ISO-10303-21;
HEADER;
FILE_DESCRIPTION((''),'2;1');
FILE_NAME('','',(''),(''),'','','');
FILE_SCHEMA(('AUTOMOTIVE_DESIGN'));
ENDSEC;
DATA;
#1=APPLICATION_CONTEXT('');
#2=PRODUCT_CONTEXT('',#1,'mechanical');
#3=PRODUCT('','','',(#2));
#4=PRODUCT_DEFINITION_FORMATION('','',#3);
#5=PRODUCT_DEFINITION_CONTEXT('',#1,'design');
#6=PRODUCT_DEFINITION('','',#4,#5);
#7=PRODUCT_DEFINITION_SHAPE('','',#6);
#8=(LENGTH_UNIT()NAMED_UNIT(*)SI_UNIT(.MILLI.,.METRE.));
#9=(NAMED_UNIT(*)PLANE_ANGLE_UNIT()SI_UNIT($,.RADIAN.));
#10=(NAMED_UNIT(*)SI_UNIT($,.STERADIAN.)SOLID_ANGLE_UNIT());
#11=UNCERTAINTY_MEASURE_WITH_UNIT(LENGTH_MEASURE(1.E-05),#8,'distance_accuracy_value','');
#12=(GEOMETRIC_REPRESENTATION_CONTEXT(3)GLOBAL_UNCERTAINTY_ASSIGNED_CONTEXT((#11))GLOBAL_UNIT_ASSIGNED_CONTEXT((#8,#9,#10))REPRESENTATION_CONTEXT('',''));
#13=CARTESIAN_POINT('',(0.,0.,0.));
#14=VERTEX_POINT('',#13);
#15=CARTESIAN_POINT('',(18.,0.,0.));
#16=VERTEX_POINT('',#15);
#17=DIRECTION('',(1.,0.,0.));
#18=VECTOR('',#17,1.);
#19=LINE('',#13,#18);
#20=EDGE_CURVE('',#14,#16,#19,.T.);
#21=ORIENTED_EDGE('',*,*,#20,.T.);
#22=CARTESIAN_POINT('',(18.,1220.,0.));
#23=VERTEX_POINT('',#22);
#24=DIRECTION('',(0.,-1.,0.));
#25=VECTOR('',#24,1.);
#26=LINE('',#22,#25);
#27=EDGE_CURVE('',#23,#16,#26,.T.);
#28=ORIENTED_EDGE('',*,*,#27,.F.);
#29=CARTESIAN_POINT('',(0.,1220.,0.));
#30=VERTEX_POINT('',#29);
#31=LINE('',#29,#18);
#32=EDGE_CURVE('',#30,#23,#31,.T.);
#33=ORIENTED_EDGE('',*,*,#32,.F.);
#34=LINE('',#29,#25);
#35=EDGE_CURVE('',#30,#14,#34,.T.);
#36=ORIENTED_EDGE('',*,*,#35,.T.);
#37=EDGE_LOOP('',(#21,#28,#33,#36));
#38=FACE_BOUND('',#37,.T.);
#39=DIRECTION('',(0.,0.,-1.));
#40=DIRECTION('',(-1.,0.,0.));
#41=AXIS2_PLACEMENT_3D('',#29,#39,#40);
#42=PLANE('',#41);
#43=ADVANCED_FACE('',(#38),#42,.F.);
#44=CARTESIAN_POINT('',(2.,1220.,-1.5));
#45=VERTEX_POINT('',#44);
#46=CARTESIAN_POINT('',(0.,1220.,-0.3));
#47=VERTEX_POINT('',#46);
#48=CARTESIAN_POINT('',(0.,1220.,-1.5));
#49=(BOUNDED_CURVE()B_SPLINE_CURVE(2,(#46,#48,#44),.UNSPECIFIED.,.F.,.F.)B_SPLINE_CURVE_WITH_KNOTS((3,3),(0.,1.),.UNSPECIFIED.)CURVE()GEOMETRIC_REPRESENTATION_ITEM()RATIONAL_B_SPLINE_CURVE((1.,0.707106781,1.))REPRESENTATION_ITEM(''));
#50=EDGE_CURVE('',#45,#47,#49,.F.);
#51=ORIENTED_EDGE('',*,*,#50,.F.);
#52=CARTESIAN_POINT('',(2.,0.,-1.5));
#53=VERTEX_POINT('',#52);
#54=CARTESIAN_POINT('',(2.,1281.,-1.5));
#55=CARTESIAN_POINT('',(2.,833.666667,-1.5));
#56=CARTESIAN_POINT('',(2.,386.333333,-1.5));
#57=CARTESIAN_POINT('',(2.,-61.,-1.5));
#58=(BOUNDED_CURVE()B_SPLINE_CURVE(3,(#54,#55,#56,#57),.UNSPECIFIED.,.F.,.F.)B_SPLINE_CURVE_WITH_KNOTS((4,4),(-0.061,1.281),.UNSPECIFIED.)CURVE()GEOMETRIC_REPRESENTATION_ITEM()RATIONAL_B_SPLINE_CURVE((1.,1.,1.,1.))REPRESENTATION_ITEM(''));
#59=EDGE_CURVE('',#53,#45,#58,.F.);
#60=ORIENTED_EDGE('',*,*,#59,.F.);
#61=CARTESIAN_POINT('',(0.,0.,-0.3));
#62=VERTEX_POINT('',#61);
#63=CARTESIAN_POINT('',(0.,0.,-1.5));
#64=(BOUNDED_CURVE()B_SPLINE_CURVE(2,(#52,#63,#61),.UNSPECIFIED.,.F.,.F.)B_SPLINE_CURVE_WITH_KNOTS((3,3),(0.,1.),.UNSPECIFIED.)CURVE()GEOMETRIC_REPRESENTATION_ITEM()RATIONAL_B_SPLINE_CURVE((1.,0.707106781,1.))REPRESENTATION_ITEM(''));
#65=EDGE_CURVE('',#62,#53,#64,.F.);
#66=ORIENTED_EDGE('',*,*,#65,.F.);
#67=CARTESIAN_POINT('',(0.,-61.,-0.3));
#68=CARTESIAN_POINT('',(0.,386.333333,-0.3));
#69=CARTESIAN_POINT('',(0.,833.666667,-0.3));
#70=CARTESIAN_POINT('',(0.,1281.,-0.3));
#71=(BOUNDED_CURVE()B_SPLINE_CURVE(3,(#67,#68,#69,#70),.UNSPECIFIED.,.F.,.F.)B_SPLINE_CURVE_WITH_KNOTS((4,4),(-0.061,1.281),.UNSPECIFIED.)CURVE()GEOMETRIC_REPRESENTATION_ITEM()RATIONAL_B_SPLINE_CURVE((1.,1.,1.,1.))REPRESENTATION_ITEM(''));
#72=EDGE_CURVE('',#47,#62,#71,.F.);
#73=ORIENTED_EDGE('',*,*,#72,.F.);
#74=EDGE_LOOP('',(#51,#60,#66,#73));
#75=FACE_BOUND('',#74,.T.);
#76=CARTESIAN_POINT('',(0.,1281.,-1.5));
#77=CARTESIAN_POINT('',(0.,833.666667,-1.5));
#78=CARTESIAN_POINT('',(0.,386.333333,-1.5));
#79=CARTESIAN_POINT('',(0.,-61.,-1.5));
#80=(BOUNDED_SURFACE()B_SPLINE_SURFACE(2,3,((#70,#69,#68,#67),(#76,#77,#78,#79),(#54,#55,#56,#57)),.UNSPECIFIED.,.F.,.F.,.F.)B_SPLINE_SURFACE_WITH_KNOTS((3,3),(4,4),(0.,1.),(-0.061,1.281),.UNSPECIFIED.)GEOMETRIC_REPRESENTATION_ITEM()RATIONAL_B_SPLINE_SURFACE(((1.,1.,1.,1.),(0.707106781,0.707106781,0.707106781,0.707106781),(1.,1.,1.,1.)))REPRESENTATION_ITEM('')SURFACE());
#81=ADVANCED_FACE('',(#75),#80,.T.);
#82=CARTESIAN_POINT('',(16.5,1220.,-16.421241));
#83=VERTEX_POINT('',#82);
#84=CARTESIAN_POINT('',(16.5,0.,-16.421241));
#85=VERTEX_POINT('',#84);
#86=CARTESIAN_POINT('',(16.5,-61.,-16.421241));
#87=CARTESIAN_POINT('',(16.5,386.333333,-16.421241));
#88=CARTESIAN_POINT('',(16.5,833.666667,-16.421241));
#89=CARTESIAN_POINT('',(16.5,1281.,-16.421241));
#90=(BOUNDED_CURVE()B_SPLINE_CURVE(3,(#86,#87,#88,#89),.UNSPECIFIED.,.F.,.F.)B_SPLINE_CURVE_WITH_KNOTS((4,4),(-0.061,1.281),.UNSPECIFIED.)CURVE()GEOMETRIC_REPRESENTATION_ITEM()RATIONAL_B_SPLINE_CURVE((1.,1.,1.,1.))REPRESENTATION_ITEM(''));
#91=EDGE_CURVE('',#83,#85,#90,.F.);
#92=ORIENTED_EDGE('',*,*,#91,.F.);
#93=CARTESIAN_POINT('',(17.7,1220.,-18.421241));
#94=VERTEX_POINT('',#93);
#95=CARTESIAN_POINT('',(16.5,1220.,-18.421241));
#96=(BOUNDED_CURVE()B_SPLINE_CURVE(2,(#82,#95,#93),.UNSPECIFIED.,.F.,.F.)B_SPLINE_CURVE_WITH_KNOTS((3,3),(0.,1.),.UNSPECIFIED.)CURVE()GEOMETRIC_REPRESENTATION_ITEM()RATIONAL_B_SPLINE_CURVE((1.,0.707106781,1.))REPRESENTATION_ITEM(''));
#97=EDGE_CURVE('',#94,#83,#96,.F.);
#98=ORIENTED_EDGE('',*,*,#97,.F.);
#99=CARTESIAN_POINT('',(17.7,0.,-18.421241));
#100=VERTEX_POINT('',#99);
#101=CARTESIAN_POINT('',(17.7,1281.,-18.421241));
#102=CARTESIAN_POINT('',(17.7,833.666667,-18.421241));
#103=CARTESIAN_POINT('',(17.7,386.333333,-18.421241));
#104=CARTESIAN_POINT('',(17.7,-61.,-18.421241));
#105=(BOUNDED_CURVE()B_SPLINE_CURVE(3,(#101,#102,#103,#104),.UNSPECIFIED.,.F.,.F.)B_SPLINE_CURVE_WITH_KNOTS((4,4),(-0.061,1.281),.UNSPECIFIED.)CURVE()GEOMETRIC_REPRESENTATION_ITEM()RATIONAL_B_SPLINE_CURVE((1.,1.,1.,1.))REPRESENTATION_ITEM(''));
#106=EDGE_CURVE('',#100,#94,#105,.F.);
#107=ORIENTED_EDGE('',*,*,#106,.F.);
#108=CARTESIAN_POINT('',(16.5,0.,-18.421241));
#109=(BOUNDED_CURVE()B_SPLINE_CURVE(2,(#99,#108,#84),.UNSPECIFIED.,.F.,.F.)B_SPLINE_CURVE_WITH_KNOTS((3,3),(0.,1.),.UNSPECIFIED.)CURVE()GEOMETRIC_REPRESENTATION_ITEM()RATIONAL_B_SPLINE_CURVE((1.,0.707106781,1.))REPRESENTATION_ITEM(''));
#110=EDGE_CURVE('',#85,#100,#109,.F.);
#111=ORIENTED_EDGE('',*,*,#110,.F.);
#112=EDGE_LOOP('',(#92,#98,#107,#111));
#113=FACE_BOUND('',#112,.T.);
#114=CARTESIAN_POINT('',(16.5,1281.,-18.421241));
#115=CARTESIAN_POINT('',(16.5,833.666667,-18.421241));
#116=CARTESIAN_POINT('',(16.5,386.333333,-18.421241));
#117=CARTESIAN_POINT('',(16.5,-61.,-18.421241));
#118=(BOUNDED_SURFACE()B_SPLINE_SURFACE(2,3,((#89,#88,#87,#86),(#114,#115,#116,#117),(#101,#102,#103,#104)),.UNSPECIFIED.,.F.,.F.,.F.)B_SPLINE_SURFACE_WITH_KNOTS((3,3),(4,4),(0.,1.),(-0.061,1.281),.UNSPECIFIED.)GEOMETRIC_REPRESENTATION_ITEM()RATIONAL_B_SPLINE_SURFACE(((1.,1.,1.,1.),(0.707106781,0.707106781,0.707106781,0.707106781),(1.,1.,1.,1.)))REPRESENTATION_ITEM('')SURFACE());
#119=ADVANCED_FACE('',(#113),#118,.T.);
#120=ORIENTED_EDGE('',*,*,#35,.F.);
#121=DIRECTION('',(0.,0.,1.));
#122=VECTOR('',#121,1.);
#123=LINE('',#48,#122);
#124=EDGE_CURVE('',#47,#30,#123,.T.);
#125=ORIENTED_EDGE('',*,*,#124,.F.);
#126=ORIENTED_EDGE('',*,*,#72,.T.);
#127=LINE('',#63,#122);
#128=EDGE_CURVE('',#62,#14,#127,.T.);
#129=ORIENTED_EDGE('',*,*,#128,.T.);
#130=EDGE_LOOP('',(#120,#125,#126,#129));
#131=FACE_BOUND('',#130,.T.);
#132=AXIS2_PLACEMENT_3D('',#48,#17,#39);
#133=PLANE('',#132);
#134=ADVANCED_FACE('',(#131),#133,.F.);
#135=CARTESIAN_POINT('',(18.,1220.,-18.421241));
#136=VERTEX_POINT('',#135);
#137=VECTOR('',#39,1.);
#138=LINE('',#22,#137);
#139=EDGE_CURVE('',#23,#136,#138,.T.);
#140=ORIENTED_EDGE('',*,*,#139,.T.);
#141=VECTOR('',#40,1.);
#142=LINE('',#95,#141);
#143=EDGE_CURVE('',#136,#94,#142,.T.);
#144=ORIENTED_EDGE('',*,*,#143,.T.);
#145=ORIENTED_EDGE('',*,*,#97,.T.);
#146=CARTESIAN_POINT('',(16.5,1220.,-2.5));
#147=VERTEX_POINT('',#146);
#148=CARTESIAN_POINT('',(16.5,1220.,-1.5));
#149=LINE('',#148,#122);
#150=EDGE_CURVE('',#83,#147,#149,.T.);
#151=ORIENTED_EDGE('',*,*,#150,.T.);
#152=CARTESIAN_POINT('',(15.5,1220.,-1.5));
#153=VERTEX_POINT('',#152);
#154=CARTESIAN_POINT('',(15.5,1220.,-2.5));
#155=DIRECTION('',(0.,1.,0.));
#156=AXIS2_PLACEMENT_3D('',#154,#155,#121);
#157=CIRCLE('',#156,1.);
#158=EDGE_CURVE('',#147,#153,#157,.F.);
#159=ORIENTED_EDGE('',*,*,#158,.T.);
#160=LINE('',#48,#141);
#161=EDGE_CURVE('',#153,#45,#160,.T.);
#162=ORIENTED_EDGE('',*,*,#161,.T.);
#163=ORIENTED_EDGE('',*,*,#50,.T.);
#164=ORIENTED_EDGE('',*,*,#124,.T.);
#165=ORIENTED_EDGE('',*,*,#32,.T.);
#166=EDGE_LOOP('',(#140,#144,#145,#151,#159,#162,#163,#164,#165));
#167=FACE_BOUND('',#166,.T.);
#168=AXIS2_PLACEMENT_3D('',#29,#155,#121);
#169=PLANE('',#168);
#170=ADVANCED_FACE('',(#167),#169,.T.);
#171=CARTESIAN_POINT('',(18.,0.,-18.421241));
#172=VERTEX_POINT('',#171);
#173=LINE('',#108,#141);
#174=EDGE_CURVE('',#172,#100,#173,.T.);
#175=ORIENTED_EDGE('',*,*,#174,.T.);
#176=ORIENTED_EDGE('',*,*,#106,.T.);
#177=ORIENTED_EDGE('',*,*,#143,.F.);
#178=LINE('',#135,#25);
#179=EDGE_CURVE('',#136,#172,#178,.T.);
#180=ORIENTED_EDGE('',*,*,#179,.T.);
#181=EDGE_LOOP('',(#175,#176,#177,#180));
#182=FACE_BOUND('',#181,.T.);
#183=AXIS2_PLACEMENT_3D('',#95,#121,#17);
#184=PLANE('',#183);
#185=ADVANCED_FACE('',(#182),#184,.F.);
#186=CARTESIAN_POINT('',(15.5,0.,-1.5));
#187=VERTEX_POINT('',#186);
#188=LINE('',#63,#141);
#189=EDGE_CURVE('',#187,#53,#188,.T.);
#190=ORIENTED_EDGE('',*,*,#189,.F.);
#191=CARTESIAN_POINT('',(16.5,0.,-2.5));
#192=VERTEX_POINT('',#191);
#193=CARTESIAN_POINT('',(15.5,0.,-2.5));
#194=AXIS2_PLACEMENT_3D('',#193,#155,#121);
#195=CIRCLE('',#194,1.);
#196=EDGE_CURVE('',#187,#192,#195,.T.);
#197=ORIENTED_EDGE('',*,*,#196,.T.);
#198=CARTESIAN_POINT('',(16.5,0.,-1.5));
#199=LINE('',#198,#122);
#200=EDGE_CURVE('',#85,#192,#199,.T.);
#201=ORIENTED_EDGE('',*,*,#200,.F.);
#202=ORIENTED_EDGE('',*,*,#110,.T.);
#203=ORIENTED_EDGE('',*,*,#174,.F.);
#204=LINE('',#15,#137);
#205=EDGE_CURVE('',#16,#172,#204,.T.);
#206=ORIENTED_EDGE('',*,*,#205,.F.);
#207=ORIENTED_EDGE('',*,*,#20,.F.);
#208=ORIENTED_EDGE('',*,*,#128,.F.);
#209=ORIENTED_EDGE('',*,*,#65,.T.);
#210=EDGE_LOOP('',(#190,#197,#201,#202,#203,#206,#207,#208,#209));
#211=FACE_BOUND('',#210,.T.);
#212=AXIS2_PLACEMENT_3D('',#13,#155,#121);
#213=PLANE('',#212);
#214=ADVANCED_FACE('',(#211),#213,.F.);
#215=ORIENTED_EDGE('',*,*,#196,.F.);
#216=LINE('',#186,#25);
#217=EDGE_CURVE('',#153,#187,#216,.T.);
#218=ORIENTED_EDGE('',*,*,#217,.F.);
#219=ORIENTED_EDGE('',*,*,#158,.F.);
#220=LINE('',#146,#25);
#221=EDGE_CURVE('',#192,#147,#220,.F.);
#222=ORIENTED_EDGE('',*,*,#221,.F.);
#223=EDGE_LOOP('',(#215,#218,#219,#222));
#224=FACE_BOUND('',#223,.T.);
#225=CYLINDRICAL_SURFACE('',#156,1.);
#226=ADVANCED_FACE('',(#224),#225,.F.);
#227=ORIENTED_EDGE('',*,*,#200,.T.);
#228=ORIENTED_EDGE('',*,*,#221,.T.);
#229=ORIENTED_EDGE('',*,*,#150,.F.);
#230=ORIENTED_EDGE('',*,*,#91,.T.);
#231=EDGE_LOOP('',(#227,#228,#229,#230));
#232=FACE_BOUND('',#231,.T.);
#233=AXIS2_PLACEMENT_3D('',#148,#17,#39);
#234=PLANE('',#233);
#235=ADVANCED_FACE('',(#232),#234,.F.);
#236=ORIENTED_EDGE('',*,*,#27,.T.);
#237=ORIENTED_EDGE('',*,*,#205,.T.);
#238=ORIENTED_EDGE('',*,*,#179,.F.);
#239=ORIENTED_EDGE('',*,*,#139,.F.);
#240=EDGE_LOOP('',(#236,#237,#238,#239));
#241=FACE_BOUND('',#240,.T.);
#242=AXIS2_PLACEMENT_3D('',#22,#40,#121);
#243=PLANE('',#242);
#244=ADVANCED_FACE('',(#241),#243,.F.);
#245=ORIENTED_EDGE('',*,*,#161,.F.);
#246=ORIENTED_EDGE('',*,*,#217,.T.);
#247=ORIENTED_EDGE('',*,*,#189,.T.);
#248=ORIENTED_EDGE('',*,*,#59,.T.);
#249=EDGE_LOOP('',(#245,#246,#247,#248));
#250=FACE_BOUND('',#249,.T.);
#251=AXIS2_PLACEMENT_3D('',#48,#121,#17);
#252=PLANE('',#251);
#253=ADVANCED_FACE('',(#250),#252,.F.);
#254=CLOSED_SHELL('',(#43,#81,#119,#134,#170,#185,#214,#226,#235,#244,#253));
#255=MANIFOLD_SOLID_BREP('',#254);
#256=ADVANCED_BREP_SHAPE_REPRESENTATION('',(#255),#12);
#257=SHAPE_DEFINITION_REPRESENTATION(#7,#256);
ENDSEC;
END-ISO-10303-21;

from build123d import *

# Parameters (mm, degrees)
BOSS_EXTRUDE1_DEPTH = 1220
FILLET1_R           = 1
FILLET2_SIZE        = 2
FILLET2_SIZE_2      = 1.2
FILLET3_SIZE        = 1.2
FILLET3_SIZE_2      = 2


with BuildPart() as part:
    # Sketch1 → Boss-Extrude1 (new body)
    with BuildSketch(Plane(origin=(0, 0, 0), x_dir=(1, 0, 0), z_dir=(0, 1, 0))):
        Polygon((0, 0), (18, 0), (18, 18.421241087), (16.5, 18.421241087), (16.5, 1.5), (0, 1.5), align=None)
    extrude(amount=BOSS_EXTRUDE1_DEPTH)

    # Fillet1
    fillet1_edges = [part.edges().sort_by_distance(p)[0] for p in [
        (16.5, 610, -1.5),
    ]]
    fillet(fillet1_edges, radius=FILLET1_R)

    # Fillet2
    # an asymmetric fillet: 2, 1.2 mm, written as the material it takes off along each edge
    with BuildSketch(Plane(origin=(16.5, -5, -18.421241087), x_dir=(0, 0, 1), z_dir=(0, 1, 0))) as fillet2_piece_1:
        with BuildLine():
            Bezier((FILLET2_SIZE, 0), (0, 0), (0, FILLET2_SIZE_2), weights=[1, 0.707106781, 1])
            Line((0, FILLET2_SIZE_2), (0, 0))
            Line((0, 0), (FILLET2_SIZE, 0))
        make_face()
    extrude(amount=1230, mode=Mode.SUBTRACT)

    # Fillet3
    # an asymmetric fillet: 2, 1.2 mm, written as the material it takes off along each edge
    with BuildSketch(Plane(origin=(0, -5, -1.5), x_dir=(0, 0, 1), z_dir=(0, 1, 0))) as fillet3_piece_1:
        with BuildLine():
            Bezier((FILLET3_SIZE, 0), (0, 0), (0, FILLET3_SIZE_2), weights=[1, 0.707106781, 1])
            Line((0, FILLET3_SIZE_2), (0, 0))
            Line((0, 0), (FILLET3_SIZE, 0))
        make_face()
    extrude(amount=1230, mode=Mode.SUBTRACT)


solid = part.part
